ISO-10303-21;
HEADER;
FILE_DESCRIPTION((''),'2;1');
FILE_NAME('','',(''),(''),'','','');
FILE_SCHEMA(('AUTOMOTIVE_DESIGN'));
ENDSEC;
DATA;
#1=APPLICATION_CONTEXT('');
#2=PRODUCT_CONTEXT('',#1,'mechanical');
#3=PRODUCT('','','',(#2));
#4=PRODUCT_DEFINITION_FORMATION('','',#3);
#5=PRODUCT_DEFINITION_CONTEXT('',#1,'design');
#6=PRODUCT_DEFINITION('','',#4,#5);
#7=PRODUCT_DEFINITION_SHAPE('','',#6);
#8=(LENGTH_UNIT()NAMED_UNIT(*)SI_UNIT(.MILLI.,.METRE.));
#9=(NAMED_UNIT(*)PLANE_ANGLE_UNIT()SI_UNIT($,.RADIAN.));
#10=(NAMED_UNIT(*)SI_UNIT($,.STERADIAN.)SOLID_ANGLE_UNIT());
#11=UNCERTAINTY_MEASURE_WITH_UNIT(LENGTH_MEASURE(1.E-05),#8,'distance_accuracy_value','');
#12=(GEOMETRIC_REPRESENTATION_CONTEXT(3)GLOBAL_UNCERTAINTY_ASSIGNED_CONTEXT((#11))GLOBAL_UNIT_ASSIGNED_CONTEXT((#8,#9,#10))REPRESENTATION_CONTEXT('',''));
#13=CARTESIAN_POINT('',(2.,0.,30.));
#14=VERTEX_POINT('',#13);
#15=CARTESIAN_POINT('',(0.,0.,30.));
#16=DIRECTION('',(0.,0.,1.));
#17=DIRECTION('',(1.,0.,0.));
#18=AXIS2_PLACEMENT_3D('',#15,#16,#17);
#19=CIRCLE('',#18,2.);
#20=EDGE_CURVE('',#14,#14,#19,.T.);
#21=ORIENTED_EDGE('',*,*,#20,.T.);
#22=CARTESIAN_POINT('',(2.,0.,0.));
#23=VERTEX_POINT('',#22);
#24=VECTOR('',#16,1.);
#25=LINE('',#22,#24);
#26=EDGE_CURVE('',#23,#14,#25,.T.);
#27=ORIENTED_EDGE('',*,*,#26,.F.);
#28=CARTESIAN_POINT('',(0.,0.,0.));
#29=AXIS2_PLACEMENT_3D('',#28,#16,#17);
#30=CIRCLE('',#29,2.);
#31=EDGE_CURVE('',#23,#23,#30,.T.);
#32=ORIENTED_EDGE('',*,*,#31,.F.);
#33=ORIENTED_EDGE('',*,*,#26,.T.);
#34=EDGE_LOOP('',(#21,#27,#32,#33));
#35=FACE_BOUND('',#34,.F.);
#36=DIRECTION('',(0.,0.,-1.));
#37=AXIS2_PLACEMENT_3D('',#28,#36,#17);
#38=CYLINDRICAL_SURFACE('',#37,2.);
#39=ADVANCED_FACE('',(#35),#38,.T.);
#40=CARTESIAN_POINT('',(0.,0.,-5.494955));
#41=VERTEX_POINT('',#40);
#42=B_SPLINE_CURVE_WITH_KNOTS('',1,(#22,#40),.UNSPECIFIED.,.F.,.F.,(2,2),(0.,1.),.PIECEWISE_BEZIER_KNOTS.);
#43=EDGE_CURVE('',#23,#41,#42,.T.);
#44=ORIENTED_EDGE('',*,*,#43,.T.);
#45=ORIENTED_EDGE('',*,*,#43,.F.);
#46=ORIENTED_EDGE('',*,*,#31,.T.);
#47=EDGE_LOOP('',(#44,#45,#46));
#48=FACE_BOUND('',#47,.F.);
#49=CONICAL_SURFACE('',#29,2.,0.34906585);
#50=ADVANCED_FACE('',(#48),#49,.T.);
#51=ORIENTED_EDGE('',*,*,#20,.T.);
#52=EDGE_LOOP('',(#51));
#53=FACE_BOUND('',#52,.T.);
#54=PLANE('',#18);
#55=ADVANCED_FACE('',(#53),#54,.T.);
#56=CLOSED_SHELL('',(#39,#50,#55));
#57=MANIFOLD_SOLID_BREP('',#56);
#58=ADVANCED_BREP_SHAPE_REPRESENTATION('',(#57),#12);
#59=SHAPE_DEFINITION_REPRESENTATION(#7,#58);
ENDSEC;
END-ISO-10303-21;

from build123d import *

# Parameters (mm, degrees)
F0_R     = 2
F1_DEPTH = 30


# Not quite as in the source:
# - an extrude whose draft closes it to a point is written as a loft to that point


with BuildPart() as f1:
    # F0 (on Top) → F1 (new body)
    with BuildSketch(Plane.XY):
        Circle(F0_R)
    extrude(amount=F1_DEPTH)

    # F0 (on Top) → F2 section 0
    with BuildSketch(Plane.XY, mode=Mode.PRIVATE) as f2_s0:
        Circle(F0_R)
    loft([f2_s0.sketch, Vertex(0, 0, -5.4949548389)], ruled=True)


solid = f1.part
